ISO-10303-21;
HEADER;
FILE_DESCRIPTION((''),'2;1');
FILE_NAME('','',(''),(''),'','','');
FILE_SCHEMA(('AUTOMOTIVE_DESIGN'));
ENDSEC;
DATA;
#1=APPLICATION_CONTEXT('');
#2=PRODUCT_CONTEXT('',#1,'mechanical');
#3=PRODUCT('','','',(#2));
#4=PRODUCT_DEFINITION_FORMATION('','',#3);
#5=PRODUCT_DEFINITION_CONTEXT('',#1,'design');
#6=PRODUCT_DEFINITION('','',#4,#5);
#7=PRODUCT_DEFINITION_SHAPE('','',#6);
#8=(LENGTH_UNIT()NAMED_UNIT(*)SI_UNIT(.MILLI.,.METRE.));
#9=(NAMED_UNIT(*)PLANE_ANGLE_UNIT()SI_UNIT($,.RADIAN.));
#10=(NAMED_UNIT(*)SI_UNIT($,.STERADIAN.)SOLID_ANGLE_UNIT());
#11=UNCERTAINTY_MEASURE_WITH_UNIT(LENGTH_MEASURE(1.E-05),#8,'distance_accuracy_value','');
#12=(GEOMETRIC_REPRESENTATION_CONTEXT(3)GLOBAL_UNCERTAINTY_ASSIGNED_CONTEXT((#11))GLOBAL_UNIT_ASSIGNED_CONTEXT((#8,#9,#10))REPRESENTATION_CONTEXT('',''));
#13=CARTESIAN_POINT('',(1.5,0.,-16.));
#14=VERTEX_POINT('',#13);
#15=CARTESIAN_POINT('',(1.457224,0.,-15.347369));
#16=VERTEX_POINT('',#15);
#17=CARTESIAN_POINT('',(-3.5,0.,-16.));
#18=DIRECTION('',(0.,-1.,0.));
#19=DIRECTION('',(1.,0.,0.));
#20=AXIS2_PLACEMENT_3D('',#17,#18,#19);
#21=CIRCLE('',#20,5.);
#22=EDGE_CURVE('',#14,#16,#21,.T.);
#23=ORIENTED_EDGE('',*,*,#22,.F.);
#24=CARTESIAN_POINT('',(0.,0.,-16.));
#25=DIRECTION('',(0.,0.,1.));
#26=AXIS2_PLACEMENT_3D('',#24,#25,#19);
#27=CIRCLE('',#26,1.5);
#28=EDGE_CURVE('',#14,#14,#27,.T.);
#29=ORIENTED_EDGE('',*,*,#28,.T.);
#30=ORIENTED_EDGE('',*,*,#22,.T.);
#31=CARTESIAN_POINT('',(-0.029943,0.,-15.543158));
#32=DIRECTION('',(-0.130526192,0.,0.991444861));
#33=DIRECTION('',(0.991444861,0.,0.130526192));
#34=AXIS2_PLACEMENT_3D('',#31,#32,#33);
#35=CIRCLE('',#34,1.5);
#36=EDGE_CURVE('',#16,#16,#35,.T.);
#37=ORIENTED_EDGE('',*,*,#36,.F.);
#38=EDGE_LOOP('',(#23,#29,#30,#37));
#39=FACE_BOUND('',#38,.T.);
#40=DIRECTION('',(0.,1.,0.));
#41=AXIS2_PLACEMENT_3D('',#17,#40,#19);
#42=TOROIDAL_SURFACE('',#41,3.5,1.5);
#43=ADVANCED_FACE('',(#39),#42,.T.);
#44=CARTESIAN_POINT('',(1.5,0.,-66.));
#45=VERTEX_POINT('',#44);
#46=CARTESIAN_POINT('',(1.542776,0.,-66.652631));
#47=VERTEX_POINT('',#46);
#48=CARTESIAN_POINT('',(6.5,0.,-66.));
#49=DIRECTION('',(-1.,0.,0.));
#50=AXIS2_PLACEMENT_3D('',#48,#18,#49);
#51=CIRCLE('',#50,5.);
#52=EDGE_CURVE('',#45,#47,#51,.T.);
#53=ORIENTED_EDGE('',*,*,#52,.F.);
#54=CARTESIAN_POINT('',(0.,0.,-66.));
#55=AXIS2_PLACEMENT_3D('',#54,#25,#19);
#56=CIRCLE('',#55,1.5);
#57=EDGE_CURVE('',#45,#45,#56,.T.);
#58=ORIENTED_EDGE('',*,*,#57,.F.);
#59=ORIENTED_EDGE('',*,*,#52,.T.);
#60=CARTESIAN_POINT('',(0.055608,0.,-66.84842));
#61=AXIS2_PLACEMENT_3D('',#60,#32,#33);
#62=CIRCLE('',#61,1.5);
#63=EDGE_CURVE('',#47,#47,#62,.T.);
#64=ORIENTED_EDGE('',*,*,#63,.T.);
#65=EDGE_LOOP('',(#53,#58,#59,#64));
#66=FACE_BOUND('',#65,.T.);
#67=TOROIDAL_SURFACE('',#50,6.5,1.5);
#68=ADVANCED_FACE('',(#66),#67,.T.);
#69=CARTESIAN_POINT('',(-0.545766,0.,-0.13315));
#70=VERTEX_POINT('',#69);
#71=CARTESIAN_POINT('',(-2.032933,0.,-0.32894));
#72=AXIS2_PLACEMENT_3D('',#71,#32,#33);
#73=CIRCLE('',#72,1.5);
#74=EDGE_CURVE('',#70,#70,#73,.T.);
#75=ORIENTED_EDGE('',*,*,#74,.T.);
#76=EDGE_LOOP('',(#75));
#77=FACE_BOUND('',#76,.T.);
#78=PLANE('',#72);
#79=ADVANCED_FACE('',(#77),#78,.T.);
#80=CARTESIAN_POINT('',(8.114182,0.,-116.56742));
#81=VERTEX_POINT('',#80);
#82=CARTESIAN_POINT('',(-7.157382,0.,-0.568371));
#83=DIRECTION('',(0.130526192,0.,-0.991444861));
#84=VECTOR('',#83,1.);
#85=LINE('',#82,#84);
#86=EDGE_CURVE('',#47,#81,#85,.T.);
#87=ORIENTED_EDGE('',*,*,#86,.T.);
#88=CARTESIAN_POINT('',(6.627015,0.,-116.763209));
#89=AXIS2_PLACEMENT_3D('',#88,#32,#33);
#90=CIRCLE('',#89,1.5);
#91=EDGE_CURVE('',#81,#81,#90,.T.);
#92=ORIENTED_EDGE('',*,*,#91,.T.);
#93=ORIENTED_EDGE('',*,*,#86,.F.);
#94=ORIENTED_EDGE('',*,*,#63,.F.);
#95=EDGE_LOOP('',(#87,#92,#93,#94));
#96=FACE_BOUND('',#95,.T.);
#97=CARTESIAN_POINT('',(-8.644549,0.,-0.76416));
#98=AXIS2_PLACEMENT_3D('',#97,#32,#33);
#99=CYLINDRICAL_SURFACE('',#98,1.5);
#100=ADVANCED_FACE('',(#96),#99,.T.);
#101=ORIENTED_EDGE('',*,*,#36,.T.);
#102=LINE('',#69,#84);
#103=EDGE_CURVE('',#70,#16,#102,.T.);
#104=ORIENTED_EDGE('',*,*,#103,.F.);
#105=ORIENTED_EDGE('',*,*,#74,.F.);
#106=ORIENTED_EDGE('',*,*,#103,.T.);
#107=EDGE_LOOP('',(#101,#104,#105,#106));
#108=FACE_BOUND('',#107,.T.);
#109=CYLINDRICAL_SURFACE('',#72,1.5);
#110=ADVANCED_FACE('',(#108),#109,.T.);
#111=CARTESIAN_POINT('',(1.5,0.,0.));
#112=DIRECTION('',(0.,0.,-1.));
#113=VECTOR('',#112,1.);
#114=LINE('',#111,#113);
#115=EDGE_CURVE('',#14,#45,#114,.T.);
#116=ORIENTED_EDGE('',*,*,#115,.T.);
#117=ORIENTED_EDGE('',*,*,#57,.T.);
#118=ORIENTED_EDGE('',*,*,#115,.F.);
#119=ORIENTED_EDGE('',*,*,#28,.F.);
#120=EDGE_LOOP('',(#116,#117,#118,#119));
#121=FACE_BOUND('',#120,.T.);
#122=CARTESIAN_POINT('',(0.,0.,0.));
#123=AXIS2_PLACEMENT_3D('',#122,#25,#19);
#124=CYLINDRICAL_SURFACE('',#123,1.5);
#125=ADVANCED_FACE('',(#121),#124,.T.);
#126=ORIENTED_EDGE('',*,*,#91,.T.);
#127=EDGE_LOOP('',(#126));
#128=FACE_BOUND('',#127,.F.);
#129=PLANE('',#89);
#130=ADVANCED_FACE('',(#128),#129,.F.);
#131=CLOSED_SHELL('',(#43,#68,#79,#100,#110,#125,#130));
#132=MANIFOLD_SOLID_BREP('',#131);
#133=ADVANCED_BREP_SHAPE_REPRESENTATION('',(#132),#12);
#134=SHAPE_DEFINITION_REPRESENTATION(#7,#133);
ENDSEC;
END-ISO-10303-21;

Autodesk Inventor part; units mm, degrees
ref_plane "XZ Plane" through (0, 0, 0) normal (0, 1, 0) x (-1, 0, 0)
ref_plane "XY Plane" through (0, 0, 0) normal (0, 0, 1) x (1, 0, 0)
sketch "Sketch1" plane through (0, 0, 0) normal (0, 0, 1) x (1, 0, 0)
  circle A0 centre (0, 0) radius 1.5
  dimension "d0" = 3
extrude "Extrusion1" add sketch "Sketch1" against normal blind 117
ref_plane "Work Plane1" through (1.5, 0, 0) normal (1, 0, 0) x (0, 1, 0)
sketch "Sketch2" plane through (1.5, 0, 0) normal (1, 0, 0) x (0, 1, 0)
  line L0 (1.5, 0) -> (1.5, -117) projected
  line L1 (1.5, 0) -> (-1.5, 0)
  line L2 (-1.5, 0) -> (-1.5, -117) projected
  line L3 (1.5, -16) -> (-1.5, -16)
  line L4 (1.5, -66) -> (-1.5, -66)
  line L5 (-1.5, -66) -> (1.5, -66)
  point P0 (0, 0)
  dimension "d4" = 0
  dimension "d5" = 16
  dimension "d6" = 50
  dimension "d17" = 0
  dimension "d18" = 0
  dimension "d19" = 3
  dimension "d20" = 3
bend part "Bend Part1" radius 5 angle 7.5 line through (1.5, -1.5, -66) along (0, 1, 0) centre toward (1, 0, 0) moving side (0, 0, -1) both sides no
sketch "Sketch3" plane through (1.5, 0, 0) normal (1, 0, 0) x (0, 1, 0)
  line L0 (-1.5, -66) -> (1.5, -66) projected
  line L1 (1.5, -66) -> (-1.5, -66)
  line L2 (-1.5, -66) -> (-1.5, -66.8484) projected
  line L3 (2.4329, -66) -> (-2.7481, -66)
  line L4 (2.4329, -16) -> (-2.7481, -16)
  point P0 (0, 0)
  dimension "d9" = 50
  dimension "d12" = 50
  dimension "d13" = 3.9329
  dimension "d14" = 3.9329
  dimension "d15" = 1.2481
  dimension "d16" = 1.2481
bend part "Bend Part2" radius 5 angle 7.5 line through (1.5, 2.4329, -16) along (0, -1, 0) centre toward (-1, 0, 0) moving side (0, 0, 1) both sides no
thread "Thread1" size "M3x0.5" class "6g" standard "ANSI Metric M Profile" length 4
properties part number "32 - Eccentric Disk Rod" material "Steel AISI 1020 107 HR"
